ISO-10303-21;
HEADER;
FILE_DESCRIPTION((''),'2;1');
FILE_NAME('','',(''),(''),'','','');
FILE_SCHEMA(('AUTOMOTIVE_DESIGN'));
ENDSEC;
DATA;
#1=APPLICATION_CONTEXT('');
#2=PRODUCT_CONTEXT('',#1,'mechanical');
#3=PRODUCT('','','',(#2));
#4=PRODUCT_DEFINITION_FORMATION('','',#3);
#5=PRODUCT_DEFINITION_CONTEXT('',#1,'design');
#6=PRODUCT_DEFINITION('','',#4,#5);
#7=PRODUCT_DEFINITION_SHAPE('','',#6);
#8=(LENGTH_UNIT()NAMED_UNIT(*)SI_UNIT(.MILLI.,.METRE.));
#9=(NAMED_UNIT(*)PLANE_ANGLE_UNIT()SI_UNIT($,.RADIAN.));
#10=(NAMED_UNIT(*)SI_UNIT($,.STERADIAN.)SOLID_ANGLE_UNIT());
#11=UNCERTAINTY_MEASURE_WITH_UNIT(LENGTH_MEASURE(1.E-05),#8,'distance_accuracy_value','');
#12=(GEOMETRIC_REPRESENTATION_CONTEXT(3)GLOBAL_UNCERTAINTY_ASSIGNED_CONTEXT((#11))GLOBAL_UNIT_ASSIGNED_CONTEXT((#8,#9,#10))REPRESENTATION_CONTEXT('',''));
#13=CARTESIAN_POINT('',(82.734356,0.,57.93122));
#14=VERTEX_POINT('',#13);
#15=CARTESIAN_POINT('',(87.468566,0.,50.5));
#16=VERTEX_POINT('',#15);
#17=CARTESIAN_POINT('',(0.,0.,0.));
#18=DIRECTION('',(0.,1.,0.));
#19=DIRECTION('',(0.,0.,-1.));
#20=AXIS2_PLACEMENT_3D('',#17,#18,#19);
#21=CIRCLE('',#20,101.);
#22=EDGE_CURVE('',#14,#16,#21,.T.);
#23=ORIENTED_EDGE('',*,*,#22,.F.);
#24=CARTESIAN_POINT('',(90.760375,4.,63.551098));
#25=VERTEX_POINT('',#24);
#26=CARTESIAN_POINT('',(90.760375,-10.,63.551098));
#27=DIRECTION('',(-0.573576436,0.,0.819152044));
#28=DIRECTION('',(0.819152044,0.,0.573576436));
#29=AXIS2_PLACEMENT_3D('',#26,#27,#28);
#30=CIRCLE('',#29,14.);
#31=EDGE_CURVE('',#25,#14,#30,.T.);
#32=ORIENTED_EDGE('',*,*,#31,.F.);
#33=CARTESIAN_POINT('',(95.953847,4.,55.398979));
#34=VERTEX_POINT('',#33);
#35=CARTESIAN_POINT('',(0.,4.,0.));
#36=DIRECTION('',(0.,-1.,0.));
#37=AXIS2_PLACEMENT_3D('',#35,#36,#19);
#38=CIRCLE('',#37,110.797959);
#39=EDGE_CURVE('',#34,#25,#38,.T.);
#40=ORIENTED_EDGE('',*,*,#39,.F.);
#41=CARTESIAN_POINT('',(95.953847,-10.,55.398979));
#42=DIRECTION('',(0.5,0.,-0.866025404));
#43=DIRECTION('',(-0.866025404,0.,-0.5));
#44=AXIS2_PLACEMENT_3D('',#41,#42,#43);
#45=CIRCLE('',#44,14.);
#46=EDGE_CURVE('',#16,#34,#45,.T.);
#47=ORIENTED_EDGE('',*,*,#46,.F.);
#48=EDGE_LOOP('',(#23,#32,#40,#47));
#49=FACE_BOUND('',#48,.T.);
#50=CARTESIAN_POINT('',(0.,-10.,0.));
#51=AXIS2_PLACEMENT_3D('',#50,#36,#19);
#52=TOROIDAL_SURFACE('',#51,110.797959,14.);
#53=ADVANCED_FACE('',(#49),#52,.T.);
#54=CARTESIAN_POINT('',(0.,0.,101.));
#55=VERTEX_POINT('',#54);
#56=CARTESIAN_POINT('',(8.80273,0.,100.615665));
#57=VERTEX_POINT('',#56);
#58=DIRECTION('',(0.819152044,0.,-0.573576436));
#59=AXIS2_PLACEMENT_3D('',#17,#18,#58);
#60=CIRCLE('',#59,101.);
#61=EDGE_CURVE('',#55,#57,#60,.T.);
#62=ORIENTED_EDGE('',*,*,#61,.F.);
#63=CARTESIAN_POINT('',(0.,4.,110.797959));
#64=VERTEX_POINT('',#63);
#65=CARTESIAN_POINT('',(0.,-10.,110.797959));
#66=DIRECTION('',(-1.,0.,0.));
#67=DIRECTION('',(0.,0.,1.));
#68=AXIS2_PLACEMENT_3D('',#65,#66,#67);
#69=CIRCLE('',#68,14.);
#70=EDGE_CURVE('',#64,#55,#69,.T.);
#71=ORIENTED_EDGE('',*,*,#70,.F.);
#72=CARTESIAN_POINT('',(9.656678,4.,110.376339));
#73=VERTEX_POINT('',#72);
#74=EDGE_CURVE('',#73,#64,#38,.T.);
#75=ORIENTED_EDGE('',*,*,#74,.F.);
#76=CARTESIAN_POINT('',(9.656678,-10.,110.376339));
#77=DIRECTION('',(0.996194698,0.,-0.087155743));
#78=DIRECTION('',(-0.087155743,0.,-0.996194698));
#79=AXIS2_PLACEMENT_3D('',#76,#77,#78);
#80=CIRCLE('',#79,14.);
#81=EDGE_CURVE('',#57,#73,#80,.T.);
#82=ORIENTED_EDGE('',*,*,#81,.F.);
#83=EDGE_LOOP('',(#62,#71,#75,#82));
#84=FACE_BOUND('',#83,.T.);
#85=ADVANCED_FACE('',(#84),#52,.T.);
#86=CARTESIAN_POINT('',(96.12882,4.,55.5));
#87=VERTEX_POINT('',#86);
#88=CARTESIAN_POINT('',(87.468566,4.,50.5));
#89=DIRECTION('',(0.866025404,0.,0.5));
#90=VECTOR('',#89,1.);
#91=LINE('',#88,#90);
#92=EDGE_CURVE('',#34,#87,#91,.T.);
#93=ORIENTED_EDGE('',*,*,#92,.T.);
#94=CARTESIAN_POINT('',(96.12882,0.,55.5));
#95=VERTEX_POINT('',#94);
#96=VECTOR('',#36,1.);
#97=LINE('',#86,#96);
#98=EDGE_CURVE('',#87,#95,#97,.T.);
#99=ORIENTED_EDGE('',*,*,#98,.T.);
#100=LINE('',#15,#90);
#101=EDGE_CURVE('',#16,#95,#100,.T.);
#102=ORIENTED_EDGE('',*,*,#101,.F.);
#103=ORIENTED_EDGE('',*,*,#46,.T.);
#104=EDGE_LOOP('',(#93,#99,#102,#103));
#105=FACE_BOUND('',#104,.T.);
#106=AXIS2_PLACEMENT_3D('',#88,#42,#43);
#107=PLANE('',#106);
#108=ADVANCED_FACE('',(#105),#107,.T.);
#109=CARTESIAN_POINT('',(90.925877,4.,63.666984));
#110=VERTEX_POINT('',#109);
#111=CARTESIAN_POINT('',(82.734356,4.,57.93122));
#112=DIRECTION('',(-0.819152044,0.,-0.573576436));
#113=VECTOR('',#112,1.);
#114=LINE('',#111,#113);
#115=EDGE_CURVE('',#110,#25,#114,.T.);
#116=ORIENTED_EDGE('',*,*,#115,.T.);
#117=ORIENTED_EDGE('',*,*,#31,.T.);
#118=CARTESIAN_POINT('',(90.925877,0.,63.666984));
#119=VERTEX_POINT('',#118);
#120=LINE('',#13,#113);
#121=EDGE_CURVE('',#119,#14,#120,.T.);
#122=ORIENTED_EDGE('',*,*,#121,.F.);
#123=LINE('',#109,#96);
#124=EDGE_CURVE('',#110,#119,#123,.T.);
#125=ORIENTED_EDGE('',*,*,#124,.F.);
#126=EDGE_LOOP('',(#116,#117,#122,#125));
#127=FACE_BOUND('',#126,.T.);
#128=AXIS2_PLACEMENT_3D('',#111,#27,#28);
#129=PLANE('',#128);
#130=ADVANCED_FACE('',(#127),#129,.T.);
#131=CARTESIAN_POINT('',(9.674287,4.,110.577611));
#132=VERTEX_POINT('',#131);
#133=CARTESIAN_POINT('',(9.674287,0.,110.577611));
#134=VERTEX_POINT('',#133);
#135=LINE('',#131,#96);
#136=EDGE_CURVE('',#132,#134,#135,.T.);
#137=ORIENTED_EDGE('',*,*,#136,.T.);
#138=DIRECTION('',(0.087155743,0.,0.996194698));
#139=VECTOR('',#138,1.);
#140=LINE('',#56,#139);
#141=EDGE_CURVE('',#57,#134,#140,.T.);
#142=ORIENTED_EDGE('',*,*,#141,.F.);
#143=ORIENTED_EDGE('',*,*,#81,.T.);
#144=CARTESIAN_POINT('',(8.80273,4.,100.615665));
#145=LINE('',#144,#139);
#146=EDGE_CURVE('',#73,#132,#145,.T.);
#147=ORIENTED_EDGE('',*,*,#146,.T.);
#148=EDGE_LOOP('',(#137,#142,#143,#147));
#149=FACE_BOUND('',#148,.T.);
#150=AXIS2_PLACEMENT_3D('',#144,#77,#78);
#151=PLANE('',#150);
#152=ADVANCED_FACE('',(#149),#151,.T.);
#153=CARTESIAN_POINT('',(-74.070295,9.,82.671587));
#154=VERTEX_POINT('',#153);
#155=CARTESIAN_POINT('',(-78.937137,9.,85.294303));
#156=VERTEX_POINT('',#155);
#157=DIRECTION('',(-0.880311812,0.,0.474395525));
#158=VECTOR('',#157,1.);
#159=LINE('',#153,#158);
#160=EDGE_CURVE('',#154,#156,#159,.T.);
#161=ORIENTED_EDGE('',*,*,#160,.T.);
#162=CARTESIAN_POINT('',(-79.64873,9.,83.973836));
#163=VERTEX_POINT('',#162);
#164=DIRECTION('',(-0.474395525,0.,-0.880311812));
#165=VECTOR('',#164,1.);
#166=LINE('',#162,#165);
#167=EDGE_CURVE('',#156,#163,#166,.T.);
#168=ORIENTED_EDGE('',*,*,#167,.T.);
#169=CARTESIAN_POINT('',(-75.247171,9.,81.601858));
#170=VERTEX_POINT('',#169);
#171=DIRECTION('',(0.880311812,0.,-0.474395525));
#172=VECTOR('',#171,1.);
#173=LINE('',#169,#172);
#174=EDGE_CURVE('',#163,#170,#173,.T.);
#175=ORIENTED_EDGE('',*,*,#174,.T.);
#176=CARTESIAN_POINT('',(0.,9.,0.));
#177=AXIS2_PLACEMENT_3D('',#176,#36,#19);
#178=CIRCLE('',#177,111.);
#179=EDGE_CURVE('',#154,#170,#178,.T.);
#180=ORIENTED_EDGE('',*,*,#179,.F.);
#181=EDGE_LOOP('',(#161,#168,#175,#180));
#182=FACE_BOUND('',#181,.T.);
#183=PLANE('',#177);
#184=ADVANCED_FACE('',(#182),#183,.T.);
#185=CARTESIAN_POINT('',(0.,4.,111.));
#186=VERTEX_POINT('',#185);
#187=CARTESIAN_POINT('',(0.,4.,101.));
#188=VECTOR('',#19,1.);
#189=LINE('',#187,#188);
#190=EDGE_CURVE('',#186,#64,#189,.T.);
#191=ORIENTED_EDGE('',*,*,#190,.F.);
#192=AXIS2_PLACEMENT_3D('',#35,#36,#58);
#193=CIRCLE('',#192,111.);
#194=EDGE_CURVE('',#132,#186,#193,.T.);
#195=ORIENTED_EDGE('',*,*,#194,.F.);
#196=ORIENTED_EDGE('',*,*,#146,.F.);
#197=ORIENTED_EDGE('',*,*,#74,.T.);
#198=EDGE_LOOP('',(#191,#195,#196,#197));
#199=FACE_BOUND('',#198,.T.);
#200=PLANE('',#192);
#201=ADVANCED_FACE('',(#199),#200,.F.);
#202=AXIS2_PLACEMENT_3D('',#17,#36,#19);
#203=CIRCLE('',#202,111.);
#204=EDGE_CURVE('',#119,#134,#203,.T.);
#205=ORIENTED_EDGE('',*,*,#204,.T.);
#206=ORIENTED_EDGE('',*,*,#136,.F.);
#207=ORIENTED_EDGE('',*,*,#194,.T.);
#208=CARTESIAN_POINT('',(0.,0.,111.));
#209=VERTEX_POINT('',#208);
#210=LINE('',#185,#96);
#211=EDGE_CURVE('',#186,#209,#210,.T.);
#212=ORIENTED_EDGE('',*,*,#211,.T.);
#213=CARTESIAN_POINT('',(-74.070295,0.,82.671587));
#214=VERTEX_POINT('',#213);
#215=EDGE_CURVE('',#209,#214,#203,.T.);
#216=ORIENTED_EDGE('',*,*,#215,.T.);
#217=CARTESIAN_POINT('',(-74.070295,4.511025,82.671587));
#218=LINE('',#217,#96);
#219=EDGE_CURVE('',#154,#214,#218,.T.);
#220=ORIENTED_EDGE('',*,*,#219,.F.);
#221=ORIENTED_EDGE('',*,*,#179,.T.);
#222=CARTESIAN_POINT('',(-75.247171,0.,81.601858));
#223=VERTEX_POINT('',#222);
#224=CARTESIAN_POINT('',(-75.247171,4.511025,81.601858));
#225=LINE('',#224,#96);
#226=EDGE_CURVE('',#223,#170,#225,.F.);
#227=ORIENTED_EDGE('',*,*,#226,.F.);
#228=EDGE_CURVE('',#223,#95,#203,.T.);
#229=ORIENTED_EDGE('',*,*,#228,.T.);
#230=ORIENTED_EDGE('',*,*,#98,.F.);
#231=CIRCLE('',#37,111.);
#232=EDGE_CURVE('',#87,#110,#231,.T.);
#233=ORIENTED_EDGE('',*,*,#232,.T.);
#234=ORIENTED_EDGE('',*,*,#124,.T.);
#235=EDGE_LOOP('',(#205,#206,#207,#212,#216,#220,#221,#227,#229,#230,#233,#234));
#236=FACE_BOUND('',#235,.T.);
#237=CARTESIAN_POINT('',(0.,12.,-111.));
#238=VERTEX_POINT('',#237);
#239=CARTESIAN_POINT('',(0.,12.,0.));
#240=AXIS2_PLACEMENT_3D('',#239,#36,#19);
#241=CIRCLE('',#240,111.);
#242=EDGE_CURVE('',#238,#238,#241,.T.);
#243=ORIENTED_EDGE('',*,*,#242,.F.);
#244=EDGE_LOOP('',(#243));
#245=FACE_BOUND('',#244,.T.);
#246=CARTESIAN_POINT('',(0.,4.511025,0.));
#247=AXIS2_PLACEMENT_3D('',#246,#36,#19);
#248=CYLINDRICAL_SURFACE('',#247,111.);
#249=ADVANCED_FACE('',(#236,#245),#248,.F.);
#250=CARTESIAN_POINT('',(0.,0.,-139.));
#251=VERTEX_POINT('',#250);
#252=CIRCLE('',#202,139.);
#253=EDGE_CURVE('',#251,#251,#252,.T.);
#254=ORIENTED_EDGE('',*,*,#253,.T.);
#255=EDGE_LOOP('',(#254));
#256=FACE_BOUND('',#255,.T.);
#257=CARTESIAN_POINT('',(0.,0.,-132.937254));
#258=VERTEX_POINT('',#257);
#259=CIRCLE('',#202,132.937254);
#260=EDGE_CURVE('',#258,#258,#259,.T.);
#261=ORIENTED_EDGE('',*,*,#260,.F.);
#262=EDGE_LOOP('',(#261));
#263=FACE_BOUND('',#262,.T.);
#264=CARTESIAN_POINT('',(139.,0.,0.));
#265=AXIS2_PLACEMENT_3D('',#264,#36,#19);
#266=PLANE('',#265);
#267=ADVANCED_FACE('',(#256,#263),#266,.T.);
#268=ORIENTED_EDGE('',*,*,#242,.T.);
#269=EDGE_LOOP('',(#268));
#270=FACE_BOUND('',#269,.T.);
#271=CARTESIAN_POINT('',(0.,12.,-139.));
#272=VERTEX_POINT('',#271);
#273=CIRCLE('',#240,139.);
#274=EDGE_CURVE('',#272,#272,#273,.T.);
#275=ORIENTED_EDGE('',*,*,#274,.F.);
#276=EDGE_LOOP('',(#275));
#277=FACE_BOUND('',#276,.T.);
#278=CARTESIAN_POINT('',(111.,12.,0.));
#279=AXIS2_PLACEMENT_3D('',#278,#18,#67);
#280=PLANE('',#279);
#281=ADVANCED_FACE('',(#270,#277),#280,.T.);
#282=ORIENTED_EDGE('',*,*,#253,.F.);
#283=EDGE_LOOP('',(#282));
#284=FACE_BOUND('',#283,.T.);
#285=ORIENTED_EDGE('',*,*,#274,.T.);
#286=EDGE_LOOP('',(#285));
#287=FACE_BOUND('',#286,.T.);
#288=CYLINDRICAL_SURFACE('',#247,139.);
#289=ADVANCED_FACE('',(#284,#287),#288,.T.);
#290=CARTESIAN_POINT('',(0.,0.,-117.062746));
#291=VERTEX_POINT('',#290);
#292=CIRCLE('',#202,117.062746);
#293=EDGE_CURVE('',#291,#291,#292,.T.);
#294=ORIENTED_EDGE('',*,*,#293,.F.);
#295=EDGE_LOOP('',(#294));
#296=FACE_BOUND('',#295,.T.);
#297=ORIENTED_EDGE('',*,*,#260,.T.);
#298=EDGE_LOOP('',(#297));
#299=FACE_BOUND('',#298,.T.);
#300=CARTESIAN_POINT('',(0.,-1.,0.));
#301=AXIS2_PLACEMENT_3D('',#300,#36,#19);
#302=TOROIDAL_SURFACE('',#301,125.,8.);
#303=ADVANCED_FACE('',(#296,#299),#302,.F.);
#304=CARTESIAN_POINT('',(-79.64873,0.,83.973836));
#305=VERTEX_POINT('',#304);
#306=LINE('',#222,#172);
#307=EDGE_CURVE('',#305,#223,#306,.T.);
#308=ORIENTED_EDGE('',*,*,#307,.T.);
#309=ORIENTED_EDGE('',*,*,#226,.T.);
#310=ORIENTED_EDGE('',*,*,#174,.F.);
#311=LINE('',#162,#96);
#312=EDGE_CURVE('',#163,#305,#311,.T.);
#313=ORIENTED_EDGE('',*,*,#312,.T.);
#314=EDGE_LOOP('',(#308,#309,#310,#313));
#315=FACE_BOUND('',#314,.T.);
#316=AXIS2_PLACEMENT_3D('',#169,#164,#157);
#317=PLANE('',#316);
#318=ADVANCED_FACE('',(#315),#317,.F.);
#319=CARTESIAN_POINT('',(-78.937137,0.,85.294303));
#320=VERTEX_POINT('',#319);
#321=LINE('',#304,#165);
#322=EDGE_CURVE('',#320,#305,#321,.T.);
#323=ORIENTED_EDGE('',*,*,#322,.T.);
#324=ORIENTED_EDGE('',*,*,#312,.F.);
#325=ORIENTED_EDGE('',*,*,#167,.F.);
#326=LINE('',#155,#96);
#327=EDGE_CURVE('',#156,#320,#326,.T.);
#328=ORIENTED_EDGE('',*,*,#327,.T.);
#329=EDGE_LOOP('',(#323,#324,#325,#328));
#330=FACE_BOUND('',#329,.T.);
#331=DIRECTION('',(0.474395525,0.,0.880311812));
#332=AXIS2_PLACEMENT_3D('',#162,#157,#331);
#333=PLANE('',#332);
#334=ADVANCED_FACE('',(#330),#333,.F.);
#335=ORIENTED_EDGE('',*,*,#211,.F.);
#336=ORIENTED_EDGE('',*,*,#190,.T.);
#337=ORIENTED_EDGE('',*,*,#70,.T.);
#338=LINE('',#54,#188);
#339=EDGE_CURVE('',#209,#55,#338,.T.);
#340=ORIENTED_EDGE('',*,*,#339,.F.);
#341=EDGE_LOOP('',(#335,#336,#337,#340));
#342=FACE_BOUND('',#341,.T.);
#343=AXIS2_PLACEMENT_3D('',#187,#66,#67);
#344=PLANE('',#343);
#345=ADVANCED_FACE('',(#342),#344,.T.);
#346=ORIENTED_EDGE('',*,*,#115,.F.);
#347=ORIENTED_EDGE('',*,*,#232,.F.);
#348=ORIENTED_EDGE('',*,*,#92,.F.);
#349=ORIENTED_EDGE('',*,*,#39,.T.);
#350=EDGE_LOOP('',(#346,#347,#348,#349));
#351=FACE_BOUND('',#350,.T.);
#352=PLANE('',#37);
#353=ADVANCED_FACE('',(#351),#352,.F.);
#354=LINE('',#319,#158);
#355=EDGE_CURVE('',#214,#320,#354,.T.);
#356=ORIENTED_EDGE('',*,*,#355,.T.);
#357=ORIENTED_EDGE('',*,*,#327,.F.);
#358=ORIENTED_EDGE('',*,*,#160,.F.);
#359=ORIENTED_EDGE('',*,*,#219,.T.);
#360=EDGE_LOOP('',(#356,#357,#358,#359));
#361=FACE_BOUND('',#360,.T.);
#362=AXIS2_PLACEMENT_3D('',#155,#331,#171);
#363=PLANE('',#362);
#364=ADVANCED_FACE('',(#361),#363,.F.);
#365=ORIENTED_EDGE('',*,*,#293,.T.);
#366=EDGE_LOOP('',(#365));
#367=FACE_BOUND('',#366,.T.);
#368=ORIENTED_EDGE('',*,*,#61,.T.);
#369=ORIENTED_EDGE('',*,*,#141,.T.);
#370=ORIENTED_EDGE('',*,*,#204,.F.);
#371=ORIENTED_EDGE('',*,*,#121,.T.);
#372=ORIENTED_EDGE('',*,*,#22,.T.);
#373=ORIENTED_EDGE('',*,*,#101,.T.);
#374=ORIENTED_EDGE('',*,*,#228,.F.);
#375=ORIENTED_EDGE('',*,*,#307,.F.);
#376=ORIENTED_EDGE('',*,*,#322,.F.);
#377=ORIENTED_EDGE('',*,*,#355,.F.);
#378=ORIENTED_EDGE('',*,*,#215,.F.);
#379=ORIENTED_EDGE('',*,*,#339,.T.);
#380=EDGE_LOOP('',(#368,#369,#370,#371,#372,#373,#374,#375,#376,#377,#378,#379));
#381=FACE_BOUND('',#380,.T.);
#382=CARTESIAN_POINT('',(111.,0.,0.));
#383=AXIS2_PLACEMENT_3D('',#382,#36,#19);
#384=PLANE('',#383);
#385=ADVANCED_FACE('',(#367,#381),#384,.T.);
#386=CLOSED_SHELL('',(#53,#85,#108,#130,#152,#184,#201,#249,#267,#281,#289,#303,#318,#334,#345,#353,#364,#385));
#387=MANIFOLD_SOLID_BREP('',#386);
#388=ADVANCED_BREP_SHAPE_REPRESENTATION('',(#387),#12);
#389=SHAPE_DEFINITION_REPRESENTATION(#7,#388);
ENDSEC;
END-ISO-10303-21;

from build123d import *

# Parameters (mm, degrees)
BOSS_EXTRUDE1_START = -4
BOSS_EXTRUDE1_DEPTH = 4
CIRPATTERN2_COUNT   = 2
CIRPATTERN2_ANGLE   = 55
CUT_EXTRUDE1_DEPTH  = 9
FILLET1_R           = 14


with BuildPart() as part:
    # Sketch1 → Revolve1 (revolve)
    with BuildSketch(Plane.XY, mode=Mode.PRIVATE) as revolve1_sk:
        with BuildLine():
            Line((111, 12), (139, 12))
            Line((139, 12), (139, 0))
            Line((139, 0), (132.937253933, 0))
            ThreePointArc((132.937253933, 0), (125, 7), (117.062746067, 0))
            Line((117.062746067, 0), (111, 0))
            Line((111, 0), (111, 12))
        make_face()
    revolve(revolve1_sk.sketch.rotate(Axis((0, 4.511025306, 0), (0, 1, 0)), 90), axis=Axis((0, 4.511025306, 0), (0, 1, 0)))

    # Sketch2 → Boss-Extrude1 (add)
    with BuildSketch(Plane.XZ.offset(BOSS_EXTRUDE1_START)):
        with BuildLine():
            Line((82.734356473, 57.931220071), (90.925876916, 63.666984435))
            ThreePointArc((90.925876916, 63.666984435), (93.616450485, 59.640256526), (96.12881982, 55.5))
            Line((96.12881982, 55.5), (87.468565782, 50.5))
            ThreePointArc((87.468565782, 50.5), (85.182536027, 54.267260443), (82.734356473, 57.931220071))
        make_face()
    boss_extrude1 = extrude(amount=BOSS_EXTRUDE1_DEPTH)

    # CirPattern2: Boss-Extrude1 ×2 about axis
    cirpattern2_axis = Axis((0, 0, 0), (0, -1, 0))
    for i in range(1, CIRPATTERN2_COUNT):
        add(boss_extrude1.rotate(cirpattern2_axis, i * CIRPATTERN2_ANGLE / (CIRPATTERN2_COUNT - 1)))

    # Sketch5 → Cut-Extrude1 (cut)
    with BuildSketch(Plane.XZ):
        Polygon((-75.247171131, 81.601858047), (-79.64873019, 83.973835671), (-78.937136903, 85.294303389), (-74.070295271, 82.671587371), (-71.895448203, 81.499573429), (-72.60704149, 80.179105712), align=None)
    extrude(amount=-CUT_EXTRUDE1_DEPTH, mode=Mode.SUBTRACT)

    # Fillet1
    # the kernel refuses this fillet: 14 mm, written as the material it takes off along each edge
    with BuildSketch(Plane(origin=(0, 4, 0), x_dir=(0.9607578733888479, 0, 0.2773883716404464), z_dir=(0.2773883716404464, 0, -0.9607578733888479))) as fillet1_piece_1:
        with BuildLine():
            CenterArc((110.797958971, 14), FILLET1_R, 225.584691403, 44.415308597)
            Line((110.797958971, 0), (110.797958971, -0.28))
            Line((110.797958971, -0.28), (101, -0.28))
            Line((101, -0.28), (100.72, 0))
            ThreePointArc((100.72, 0), (100.72, 2), (100.804040821, 3.8))
            Line((100.804040821, 3.8), (101, 4))
        make_face()
    revolve(axis=Axis((0, 4, 0), (0, -1, 0)), revolution_arc=32.79120756, mode=Mode.SUBTRACT)
    with BuildSketch(Plane(origin=(0, 4, 0), x_dir=(0.32384482552331617, 0, 0.9461102097439669), z_dir=(0.9461102097439669, 0, -0.32384482552331617))) as fillet1_piece_2:
        with BuildLine():
            CenterArc((110.797958971, 14), FILLET1_R, 225.584691403, 44.415308597)
            Line((110.797958971, 0), (110.797958971, -0.28))
            Line((110.797958971, -0.28), (101, -0.28))
            Line((101, -0.28), (100.72, 0))
            ThreePointArc((100.72, 0), (100.72, 2), (100.804040821, 3.8))
            Line((100.804040821, 3.8), (101, 4))
        make_face()
    revolve(axis=Axis((0, 4, 0), (0, -1, 0)), revolution_arc=32.79120756, mode=Mode.SUBTRACT)


solid = part.part
